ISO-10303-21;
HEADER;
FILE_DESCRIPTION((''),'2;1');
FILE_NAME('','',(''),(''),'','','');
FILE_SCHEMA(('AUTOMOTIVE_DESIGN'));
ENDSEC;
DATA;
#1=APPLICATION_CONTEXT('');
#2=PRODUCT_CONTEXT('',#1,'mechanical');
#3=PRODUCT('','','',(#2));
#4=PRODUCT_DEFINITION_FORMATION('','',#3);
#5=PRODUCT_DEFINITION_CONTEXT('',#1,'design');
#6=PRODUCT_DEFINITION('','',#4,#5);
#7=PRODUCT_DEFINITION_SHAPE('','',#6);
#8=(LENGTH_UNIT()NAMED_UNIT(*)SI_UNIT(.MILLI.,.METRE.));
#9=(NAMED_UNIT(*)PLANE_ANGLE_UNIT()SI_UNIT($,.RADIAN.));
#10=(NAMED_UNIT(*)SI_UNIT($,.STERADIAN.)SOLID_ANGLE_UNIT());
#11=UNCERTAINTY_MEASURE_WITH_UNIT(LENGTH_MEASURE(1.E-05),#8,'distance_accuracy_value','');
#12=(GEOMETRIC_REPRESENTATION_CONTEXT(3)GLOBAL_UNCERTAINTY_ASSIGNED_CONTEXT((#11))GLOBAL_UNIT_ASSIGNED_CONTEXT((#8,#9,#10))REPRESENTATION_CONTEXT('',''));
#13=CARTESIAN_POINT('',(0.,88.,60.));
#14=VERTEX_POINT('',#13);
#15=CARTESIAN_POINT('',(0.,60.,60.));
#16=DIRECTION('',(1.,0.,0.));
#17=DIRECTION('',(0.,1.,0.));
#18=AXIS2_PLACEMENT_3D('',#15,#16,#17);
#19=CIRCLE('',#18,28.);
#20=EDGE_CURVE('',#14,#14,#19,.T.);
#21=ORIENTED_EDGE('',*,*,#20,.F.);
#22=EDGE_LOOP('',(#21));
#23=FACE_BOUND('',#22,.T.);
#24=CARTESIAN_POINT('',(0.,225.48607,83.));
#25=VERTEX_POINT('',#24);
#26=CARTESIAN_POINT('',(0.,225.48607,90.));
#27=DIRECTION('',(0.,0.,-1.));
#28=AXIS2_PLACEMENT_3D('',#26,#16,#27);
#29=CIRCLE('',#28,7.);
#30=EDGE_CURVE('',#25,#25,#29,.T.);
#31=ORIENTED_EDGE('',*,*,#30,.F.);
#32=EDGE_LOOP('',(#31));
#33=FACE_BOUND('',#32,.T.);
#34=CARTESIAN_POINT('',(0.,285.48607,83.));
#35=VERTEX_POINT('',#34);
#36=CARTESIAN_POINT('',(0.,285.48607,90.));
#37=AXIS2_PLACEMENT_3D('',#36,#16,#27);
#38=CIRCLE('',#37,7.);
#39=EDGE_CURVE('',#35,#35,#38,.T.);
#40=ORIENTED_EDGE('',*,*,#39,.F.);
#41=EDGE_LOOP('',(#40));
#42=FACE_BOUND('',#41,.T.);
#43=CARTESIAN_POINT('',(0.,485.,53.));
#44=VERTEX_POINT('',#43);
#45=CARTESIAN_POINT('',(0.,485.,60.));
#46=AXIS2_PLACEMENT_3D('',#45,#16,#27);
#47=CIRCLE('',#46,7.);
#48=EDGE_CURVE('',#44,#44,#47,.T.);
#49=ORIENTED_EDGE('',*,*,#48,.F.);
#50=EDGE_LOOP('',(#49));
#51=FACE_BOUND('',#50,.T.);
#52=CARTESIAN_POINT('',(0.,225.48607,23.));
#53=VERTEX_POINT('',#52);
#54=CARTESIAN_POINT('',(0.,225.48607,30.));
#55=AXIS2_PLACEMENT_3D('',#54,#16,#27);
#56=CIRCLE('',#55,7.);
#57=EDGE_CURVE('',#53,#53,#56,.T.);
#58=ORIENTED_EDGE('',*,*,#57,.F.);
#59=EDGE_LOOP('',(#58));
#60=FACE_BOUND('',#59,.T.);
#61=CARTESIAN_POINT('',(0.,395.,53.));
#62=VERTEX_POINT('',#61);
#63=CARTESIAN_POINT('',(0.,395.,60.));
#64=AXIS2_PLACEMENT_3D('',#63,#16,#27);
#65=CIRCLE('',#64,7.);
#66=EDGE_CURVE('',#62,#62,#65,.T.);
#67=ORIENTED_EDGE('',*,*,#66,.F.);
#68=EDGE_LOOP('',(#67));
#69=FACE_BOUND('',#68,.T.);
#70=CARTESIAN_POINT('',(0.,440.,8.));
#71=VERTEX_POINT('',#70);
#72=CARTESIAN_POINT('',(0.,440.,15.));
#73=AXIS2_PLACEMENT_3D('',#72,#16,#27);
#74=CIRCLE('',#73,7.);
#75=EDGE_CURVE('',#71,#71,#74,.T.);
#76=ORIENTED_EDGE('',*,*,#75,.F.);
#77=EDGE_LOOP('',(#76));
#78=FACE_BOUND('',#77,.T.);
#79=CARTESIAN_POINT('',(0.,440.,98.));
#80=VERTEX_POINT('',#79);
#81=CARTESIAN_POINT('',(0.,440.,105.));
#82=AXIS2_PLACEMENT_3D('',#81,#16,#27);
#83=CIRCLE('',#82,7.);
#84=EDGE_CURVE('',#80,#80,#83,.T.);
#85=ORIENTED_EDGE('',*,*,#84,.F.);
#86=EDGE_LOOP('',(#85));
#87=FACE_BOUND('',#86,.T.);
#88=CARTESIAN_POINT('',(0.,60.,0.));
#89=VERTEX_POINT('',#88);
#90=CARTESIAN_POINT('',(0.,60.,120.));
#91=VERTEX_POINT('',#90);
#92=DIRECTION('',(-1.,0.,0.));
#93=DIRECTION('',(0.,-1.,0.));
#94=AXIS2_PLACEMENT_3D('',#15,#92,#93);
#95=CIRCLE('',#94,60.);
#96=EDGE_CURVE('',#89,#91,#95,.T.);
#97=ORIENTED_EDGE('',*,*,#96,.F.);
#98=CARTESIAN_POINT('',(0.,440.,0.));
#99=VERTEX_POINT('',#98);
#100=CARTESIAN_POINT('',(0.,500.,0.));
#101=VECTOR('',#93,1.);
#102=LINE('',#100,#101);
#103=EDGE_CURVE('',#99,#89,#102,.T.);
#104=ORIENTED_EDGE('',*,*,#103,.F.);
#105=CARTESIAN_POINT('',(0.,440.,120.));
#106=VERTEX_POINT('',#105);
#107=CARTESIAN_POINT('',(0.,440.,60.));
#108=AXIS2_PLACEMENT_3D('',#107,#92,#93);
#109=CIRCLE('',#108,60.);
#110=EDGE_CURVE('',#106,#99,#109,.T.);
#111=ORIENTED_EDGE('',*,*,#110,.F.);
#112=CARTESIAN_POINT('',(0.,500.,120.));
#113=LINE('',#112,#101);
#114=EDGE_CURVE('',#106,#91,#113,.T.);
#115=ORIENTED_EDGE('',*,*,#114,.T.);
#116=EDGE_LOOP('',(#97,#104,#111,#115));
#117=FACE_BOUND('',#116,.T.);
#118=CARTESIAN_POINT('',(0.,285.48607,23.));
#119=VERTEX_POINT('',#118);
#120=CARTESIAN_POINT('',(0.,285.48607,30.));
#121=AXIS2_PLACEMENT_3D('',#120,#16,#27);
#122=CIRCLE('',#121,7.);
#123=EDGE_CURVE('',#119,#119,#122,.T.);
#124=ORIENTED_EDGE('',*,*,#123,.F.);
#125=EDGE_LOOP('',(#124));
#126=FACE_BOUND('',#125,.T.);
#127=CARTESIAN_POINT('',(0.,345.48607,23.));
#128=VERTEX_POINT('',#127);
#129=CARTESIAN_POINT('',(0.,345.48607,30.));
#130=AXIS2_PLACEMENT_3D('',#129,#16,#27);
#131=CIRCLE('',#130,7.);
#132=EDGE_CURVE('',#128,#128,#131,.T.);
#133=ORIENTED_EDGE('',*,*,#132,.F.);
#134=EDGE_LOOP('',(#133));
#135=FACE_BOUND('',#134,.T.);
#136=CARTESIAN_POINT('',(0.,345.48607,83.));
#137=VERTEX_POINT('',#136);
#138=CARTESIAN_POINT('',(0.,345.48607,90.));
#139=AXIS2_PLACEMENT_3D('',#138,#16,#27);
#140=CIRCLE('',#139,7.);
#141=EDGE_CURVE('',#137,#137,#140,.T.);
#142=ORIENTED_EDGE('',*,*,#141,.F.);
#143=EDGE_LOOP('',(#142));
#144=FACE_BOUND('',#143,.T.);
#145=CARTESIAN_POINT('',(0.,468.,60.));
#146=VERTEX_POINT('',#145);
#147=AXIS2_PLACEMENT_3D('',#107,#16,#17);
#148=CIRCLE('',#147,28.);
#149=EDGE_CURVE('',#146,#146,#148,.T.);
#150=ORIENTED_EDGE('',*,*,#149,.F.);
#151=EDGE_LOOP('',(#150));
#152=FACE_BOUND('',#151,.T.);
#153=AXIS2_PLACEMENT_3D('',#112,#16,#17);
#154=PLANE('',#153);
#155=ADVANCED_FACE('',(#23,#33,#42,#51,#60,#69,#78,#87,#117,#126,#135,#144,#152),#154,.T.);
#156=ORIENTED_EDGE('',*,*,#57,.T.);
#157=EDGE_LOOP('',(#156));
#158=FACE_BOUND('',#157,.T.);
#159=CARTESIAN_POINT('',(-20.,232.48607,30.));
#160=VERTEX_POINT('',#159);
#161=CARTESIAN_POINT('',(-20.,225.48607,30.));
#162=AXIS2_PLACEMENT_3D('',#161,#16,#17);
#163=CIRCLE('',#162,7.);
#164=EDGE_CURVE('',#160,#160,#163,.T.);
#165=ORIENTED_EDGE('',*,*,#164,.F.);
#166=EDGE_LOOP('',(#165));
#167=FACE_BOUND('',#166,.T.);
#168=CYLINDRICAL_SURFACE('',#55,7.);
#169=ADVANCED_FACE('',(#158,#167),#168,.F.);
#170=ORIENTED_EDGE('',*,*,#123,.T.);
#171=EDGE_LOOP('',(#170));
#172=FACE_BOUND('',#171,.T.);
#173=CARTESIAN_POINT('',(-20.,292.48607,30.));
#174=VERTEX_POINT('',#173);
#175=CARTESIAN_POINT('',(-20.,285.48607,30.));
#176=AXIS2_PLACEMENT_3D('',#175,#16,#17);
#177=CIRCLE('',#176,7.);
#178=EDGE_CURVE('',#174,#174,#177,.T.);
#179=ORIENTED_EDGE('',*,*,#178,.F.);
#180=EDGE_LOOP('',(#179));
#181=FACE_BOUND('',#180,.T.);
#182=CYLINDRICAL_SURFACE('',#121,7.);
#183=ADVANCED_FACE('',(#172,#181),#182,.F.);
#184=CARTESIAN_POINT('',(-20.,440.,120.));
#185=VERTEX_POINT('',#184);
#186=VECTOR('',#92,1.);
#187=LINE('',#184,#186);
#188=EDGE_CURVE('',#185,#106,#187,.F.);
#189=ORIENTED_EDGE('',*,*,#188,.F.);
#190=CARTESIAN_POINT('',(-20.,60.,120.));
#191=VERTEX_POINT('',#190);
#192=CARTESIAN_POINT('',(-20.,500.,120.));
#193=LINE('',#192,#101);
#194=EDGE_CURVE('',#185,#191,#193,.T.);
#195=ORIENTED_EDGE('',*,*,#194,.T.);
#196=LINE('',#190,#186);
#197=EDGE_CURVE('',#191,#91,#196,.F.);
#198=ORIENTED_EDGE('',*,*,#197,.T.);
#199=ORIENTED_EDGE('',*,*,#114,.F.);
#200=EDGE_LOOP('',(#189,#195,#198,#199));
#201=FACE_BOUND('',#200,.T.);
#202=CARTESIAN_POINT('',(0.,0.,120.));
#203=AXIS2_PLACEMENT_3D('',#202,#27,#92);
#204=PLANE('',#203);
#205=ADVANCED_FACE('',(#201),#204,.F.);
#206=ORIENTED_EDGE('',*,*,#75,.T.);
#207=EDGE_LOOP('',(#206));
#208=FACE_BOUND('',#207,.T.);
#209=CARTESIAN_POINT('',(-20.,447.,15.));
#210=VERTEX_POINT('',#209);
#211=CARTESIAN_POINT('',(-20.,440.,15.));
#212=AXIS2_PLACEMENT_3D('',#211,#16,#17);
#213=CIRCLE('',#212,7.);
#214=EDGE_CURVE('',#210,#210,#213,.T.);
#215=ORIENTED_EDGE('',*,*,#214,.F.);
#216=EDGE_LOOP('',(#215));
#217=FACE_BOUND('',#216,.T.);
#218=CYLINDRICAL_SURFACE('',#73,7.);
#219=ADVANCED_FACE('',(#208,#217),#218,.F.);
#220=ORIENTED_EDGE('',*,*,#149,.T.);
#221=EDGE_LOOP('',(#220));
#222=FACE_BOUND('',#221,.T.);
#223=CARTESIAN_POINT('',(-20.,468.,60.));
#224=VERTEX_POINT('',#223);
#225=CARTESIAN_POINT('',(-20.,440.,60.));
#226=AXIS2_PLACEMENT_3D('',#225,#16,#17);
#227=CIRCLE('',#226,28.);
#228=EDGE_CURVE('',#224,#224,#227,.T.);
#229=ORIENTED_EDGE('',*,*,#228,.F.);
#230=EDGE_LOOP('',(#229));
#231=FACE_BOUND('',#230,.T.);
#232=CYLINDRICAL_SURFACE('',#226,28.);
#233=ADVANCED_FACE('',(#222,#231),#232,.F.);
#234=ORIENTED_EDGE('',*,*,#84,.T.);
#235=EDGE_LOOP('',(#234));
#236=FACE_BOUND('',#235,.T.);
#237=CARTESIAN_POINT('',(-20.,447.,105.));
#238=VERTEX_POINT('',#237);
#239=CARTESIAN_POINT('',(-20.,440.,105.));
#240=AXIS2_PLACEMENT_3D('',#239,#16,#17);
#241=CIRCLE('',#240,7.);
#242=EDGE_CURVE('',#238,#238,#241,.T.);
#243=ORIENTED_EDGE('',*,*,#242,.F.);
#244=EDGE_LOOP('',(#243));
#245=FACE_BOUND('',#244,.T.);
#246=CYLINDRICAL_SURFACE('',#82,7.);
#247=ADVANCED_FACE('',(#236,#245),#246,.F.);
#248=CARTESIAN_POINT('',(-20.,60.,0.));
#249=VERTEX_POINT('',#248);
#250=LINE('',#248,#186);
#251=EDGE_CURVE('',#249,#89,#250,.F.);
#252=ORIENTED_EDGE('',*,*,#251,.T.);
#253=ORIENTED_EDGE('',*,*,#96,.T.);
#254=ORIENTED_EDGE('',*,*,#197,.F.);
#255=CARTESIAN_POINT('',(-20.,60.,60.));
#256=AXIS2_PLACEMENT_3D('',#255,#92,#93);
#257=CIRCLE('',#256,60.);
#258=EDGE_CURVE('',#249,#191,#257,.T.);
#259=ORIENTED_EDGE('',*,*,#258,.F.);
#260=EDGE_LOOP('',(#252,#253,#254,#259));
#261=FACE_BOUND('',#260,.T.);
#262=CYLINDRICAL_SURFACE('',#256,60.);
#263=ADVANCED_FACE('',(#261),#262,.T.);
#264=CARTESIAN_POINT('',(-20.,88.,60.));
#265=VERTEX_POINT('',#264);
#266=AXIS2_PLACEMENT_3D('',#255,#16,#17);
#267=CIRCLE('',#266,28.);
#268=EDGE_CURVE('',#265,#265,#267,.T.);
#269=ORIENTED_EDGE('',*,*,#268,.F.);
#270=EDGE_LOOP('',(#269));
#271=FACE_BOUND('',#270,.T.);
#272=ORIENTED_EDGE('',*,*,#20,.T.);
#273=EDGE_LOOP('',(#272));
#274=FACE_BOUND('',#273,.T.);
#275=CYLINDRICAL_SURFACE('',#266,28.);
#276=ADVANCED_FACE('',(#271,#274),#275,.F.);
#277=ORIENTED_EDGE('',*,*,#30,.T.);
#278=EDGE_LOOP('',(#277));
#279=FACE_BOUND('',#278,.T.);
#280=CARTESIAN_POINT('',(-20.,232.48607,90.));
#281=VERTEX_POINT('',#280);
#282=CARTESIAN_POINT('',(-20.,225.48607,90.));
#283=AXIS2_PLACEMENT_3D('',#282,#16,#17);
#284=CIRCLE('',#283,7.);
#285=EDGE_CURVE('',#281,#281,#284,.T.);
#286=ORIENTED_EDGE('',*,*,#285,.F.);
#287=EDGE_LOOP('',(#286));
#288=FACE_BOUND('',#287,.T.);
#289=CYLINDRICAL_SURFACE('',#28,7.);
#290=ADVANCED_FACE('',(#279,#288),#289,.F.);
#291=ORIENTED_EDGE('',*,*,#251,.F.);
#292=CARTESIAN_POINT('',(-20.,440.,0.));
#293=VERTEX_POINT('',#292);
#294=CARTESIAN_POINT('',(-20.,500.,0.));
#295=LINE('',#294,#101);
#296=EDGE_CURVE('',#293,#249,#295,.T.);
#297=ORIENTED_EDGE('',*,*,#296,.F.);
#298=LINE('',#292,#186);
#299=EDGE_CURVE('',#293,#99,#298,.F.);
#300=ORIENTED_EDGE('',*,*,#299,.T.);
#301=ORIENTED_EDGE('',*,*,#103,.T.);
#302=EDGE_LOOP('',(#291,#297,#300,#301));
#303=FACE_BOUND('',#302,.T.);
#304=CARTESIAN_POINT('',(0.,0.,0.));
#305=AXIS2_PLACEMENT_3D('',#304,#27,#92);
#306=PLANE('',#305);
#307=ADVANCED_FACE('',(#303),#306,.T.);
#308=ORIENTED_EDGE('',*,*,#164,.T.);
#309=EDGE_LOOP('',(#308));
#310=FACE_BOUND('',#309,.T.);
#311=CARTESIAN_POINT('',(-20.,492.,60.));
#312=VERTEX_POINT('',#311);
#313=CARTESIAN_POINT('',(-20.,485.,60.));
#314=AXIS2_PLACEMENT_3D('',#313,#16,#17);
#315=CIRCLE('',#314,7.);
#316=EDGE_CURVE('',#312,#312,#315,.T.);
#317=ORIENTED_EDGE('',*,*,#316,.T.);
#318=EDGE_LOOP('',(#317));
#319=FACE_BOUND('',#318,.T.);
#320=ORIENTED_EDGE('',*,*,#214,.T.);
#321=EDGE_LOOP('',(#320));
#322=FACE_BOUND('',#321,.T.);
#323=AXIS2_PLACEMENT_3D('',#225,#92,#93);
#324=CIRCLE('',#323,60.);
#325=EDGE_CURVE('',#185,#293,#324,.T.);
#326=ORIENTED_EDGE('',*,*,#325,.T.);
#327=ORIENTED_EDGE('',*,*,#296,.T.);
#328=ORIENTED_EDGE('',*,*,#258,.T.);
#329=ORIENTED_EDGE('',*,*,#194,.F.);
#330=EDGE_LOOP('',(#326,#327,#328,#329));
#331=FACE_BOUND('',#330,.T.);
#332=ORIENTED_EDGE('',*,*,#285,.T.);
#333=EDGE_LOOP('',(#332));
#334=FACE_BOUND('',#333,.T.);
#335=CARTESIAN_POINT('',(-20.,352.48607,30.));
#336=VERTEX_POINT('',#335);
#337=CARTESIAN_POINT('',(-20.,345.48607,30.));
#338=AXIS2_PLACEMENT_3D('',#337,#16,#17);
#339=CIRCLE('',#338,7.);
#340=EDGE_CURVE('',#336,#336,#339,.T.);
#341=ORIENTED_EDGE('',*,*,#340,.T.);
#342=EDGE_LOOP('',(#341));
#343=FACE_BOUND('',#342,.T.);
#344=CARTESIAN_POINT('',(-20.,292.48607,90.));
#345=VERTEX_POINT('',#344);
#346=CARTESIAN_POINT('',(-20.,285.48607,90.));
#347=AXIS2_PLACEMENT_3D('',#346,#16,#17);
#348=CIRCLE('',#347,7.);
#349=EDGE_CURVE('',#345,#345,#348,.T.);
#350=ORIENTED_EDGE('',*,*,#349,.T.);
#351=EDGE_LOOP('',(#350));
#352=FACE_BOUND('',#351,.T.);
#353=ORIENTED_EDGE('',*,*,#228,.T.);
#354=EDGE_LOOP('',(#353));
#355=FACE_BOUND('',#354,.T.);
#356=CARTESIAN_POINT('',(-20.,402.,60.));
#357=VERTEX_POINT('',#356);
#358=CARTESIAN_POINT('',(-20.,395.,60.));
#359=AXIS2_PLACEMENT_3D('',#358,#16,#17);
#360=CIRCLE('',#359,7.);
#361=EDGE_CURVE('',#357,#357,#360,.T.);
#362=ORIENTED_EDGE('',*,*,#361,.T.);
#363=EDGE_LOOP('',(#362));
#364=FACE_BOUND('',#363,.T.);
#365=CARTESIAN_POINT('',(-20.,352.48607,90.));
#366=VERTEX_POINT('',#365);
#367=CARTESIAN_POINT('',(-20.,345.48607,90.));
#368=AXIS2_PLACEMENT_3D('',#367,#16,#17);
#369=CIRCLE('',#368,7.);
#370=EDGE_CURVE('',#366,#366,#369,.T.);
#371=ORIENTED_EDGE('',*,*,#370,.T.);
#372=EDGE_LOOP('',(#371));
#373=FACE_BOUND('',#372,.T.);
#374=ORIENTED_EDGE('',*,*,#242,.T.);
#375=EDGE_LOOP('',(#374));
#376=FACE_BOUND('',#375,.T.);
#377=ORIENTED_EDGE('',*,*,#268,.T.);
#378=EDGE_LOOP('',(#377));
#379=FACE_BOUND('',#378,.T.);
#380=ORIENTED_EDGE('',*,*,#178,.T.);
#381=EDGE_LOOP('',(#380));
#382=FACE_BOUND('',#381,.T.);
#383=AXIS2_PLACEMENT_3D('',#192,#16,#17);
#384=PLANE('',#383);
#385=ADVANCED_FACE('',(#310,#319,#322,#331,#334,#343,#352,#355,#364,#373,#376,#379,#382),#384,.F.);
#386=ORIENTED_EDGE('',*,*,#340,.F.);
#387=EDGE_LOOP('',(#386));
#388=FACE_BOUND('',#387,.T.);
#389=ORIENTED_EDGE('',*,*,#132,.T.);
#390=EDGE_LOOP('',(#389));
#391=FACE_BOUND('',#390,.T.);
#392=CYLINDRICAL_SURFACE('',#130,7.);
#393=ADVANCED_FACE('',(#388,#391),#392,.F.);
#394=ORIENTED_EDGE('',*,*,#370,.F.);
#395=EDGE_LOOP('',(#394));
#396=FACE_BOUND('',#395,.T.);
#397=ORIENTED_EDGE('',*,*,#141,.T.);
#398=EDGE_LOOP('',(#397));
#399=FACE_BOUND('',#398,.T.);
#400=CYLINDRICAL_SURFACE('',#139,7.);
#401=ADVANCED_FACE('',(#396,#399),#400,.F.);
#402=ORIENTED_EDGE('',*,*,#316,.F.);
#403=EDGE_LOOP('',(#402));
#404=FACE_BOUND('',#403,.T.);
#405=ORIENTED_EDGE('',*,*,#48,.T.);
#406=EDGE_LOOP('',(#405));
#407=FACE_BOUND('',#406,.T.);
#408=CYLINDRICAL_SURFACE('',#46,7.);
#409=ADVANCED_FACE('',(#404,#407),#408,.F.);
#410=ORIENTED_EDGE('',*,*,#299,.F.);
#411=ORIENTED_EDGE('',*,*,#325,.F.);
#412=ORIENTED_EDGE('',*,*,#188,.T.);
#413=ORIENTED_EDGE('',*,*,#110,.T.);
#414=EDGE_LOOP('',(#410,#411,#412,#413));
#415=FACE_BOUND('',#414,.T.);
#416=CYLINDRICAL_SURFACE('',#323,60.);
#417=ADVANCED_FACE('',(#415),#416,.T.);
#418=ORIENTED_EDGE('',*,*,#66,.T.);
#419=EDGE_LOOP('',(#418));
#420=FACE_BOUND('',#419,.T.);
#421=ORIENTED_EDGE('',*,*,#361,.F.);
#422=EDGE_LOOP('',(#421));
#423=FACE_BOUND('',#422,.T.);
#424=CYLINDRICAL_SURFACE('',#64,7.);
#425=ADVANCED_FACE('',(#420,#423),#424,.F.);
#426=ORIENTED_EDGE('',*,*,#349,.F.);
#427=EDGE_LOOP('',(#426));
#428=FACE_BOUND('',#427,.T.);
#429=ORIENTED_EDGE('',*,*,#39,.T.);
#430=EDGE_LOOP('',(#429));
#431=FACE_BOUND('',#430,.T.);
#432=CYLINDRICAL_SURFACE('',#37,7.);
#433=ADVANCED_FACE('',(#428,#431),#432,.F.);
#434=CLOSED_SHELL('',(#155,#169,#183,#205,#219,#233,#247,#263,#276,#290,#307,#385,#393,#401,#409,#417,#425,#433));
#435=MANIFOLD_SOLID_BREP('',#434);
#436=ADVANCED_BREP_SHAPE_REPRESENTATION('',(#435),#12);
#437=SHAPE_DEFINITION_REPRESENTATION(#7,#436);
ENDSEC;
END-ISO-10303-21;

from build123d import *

# Parameters (mm, degrees)
SKETCH_2_W                  = 20
SKETCH_2_H                  = 500
SM_BASE_FLANGE_1_DEPTH      = 120
SKETCH_3_R                  = 28
CUT_EXTRUDE_1_DEPTH         = 515.587213211
CUT_EXTRUDE_START           = -20
CUT_EXTRUDE_2_DEPTH         = 20
HOLE_WIZARD_14_0_14_1_D     = 14
HOLE_WIZARD_14_0_14_1_DEPTH = 45
HOLE_WIZARD_14_0_14_1_TIP   = 4.206024333


# Read off the part's stored shape, not the designer's step: 切除-拉伸2
# Sheet-metal steps are written as plain solids
with BuildPart() as part:
    # 草图2 → 基体-法兰1 (new body)
    with BuildSketch(Plane.XY):
        with Locations((-10, 250)):
            Rectangle(SKETCH_2_W, SKETCH_2_H)
    extrude(amount=SM_BASE_FLANGE_1_DEPTH)

    # 草图3 → 切除-拉伸1 (cut, through all)
    with BuildSketch(Plane(origin=(0, 0, 0), x_dir=(0, 0, -1), z_dir=(1, 0, 0))):
        with Locations(Location((-60, 60, 0), (0, 0, 90))):
            Circle(SKETCH_3_R)
        with Locations(Location((-60, 440, 0), (0, 0, 90))):
            Circle(SKETCH_3_R)
    extrude(amount=-CUT_EXTRUDE_1_DEPTH, mode=Mode.SUBTRACT)

    # 切除-拉伸2 outline → 切除-拉伸2 (cut)
    with BuildSketch(Plane.ZY.offset(20).offset(CUT_EXTRUDE_START)):
        with BuildLine():
            ThreePointArc((60, 0), (17.573593129, 17.573593129), (0, 60))
            Line((0, 60), (0, 0))
            Line((0, 0), (60, 0))
        make_face()
        with BuildLine():
            ThreePointArc((120, 60), (102.426406871, 17.573593129), (60, 0))
            Line((60, 0), (120, 0))
            Line((120, 0), (120, 60))
        make_face()
        with BuildLine():
            Line((0, 500), (0, 440))
            ThreePointArc((0, 440), (17.573593129, 482.426406871), (60, 500))
            Line((60, 500), (0, 500))
        make_face()
        with BuildLine():
            Line((120, 500), (60, 500))
            ThreePointArc((60, 500), (102.426406871, 482.426406871), (120, 440))
            Line((120, 440), (120, 500))
        make_face()
    extrude(amount=CUT_EXTRUDE_2_DEPTH, mode=Mode.SUBTRACT)

    # Ø14.0 (14) 直径孔1
    with Locations(Plane(origin=(0, 0, 0), x_dir=(0, 0, -1), z_dir=(1, 0, 0))):
        with Locations((-60, 485), (-105, 440), (-60, 395), (-15, 440), (-90, 225.486069721), (-90, 285.486069721), (-30, 285.486069721), (-30, 225.486069721), (-30, 345.486069721), (-90, 345.486069721)):
            Hole(HOLE_WIZARD_14_0_14_1_D / 2, depth=HOLE_WIZARD_14_0_14_1_DEPTH)
            with Locations((0, 0, -(HOLE_WIZARD_14_0_14_1_DEPTH + HOLE_WIZARD_14_0_14_1_TIP / 2))):  # 118° drill point
                Cone(0, HOLE_WIZARD_14_0_14_1_D / 2, HOLE_WIZARD_14_0_14_1_TIP, mode=Mode.SUBTRACT)


solid = part.part
